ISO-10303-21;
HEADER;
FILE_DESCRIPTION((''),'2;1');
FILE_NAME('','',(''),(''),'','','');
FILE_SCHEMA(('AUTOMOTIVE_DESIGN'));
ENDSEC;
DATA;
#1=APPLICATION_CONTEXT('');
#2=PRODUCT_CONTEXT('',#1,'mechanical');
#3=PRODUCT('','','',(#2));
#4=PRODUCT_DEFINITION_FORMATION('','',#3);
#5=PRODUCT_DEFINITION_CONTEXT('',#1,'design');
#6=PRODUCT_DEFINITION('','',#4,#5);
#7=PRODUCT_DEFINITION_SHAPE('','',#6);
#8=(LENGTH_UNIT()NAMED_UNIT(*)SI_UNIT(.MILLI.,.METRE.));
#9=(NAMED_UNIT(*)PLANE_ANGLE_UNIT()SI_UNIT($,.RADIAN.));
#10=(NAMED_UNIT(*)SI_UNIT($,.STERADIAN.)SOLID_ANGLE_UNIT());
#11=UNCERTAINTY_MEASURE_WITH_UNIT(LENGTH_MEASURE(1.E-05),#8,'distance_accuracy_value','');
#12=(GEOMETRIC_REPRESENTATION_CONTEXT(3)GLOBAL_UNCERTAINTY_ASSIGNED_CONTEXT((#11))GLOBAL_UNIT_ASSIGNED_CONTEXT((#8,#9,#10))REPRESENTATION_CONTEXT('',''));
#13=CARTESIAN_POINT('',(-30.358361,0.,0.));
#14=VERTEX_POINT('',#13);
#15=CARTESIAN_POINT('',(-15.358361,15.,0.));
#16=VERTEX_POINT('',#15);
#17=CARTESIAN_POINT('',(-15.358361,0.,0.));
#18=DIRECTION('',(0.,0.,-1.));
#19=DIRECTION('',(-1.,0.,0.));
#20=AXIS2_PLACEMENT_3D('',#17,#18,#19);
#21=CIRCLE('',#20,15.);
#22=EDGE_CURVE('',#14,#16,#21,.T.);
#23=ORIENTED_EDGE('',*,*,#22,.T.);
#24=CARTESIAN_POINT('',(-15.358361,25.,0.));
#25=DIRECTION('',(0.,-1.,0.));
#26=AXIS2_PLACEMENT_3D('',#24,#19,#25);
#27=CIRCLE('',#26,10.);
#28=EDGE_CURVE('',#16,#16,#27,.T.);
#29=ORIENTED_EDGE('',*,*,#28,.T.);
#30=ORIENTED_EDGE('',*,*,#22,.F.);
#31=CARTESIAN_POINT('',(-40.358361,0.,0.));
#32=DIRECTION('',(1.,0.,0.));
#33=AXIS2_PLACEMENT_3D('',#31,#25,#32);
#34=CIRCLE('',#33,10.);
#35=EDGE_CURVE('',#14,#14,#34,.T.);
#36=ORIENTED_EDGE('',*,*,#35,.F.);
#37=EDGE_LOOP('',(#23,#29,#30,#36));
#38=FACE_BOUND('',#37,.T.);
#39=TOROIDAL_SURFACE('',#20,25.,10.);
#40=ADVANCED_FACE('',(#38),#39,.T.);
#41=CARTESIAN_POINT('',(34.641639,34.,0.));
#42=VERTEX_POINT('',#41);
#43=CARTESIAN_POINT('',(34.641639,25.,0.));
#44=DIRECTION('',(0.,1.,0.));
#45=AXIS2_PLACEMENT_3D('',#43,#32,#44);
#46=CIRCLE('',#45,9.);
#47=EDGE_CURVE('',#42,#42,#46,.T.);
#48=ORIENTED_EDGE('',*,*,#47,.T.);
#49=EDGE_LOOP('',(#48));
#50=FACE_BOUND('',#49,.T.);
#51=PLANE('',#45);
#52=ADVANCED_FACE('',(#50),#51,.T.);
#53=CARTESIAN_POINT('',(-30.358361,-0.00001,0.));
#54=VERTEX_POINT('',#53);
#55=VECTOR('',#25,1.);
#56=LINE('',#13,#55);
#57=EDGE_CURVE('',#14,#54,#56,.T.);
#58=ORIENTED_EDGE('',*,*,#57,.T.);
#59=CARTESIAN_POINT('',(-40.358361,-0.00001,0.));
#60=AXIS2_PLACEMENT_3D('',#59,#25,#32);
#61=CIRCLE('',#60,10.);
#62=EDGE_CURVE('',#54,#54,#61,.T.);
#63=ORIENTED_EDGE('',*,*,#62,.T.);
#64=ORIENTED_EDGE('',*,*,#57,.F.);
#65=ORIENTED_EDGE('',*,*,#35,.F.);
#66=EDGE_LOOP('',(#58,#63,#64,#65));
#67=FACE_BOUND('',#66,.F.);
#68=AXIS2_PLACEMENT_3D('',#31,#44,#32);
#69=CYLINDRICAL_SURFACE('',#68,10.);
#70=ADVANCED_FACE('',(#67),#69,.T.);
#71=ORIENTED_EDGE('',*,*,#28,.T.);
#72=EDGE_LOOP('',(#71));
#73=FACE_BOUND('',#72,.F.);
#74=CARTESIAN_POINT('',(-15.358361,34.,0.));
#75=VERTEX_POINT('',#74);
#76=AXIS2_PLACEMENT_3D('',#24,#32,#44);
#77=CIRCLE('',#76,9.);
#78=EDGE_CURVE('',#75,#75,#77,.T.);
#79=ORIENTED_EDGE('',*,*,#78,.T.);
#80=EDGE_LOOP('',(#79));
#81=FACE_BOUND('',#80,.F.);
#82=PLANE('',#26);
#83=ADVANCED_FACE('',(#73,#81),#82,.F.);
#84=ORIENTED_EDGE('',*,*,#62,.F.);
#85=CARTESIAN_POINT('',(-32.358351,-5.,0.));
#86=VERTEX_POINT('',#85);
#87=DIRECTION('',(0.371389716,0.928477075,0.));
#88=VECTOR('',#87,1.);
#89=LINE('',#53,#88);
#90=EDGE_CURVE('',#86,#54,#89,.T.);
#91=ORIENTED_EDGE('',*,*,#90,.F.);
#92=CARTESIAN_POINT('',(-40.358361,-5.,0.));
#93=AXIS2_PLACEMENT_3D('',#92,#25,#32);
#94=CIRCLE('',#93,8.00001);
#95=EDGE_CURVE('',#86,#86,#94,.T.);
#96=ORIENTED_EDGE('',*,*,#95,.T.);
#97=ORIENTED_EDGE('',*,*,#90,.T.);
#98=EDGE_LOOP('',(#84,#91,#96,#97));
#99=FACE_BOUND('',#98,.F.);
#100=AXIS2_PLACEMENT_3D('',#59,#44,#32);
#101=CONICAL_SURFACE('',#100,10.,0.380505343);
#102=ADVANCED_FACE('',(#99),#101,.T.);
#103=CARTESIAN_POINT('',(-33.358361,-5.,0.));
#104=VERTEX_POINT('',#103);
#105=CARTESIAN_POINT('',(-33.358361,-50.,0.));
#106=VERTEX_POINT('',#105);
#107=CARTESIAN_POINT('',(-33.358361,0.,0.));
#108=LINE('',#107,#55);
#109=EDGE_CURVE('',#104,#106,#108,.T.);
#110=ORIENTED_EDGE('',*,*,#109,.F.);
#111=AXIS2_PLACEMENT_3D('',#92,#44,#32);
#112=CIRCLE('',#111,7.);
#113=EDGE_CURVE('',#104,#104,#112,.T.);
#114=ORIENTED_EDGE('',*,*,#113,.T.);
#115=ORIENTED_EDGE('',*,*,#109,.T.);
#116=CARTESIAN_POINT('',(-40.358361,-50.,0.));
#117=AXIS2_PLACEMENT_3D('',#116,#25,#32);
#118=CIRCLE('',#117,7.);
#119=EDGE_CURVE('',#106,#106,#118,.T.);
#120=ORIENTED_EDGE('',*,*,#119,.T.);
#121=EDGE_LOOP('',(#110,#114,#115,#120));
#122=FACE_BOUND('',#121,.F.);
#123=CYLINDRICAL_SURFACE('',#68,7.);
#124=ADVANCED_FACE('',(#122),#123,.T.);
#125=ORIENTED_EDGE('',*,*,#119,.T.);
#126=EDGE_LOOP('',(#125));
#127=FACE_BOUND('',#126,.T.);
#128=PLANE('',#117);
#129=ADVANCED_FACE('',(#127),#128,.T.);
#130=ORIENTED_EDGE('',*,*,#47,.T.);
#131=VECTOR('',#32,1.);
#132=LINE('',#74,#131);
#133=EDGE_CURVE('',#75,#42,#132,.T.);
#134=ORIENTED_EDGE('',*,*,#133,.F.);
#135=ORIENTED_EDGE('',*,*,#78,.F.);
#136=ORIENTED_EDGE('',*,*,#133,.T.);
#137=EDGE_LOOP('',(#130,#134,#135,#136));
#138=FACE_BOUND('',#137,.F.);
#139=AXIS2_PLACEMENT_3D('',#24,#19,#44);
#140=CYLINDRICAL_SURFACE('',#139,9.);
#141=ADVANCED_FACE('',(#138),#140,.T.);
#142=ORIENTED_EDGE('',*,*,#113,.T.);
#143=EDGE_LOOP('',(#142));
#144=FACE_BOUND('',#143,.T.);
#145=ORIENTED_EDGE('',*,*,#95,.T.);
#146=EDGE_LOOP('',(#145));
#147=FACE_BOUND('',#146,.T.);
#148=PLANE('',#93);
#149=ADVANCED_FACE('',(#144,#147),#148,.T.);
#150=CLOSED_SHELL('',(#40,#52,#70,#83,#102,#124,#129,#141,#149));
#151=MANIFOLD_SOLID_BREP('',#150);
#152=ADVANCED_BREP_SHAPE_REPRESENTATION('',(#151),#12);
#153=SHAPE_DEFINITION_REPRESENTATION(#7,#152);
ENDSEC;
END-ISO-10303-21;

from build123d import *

# Parameters (mm, degrees)
F0_R     = 10
F3_ANGLE = 90
F4_R     = 7
F5_DEPTH = 50
F6_R     = 9
F7_DEPTH = 50
F8_DEPTH = 5
F9_SIZE2 = 4.99999
F9_SIZE  = 1.99999


# Not quite as in the source:
# - a fillet or chamfer is up to 0.001 mm smaller than in the source, because OpenCascade refuses the exact size


with BuildPart() as f3:
    # F0 (on Front) → F3 (revolve)
    with BuildSketch(Plane.XZ):
        with Locations((-40.3583608249, 0)):
            Circle(F0_R)
    revolve(axis=Axis((-15.3583608249, 0, 6.4160241745), (0, 0, -1)), revolution_arc=F3_ANGLE)

    # F6 (on face) → F7 (join)
    with BuildSketch(Plane.YZ.offset(-15.3583608249)):
        with Locations((25, 0)):
            Circle(F6_R)
    extrude(amount=F7_DEPTH)

    # F8 (add): a face of the model
    f8_faces = [f3.faces().sort_by_distance(p)[0] for p in [
        (-40.3583608249, 0, 0),
    ]]


with BuildPart() as f5:
    # F4 (on face) → F5 (new body)
    with BuildSketch(Plane.XZ):
        with Locations((-40.3583608249, 0)):
            Circle(F4_R)
    extrude(amount=F5_DEPTH)


with BuildPart() as f3_1:
    add(f3.part)

    add(f5.part)  # F8 merges F5
    extrude(f8_faces, amount=F8_DEPTH)

    # F9 (size 2 and 5 in the source; OpenCascade refuses exactly that, so slightly less here)
    f9_edges = [f3_1.edges().sort_by_distance(p)[0] for p in [
        (-50.358361, -5, 0),
    ]]
    f9_side = f3_1.faces().sort_by_distance((-50.075518, -5, 0))[0]
    chamfer(f9_edges, length=F9_SIZE, length2=F9_SIZE2, reference=f9_side)


solid = f3_1.part
